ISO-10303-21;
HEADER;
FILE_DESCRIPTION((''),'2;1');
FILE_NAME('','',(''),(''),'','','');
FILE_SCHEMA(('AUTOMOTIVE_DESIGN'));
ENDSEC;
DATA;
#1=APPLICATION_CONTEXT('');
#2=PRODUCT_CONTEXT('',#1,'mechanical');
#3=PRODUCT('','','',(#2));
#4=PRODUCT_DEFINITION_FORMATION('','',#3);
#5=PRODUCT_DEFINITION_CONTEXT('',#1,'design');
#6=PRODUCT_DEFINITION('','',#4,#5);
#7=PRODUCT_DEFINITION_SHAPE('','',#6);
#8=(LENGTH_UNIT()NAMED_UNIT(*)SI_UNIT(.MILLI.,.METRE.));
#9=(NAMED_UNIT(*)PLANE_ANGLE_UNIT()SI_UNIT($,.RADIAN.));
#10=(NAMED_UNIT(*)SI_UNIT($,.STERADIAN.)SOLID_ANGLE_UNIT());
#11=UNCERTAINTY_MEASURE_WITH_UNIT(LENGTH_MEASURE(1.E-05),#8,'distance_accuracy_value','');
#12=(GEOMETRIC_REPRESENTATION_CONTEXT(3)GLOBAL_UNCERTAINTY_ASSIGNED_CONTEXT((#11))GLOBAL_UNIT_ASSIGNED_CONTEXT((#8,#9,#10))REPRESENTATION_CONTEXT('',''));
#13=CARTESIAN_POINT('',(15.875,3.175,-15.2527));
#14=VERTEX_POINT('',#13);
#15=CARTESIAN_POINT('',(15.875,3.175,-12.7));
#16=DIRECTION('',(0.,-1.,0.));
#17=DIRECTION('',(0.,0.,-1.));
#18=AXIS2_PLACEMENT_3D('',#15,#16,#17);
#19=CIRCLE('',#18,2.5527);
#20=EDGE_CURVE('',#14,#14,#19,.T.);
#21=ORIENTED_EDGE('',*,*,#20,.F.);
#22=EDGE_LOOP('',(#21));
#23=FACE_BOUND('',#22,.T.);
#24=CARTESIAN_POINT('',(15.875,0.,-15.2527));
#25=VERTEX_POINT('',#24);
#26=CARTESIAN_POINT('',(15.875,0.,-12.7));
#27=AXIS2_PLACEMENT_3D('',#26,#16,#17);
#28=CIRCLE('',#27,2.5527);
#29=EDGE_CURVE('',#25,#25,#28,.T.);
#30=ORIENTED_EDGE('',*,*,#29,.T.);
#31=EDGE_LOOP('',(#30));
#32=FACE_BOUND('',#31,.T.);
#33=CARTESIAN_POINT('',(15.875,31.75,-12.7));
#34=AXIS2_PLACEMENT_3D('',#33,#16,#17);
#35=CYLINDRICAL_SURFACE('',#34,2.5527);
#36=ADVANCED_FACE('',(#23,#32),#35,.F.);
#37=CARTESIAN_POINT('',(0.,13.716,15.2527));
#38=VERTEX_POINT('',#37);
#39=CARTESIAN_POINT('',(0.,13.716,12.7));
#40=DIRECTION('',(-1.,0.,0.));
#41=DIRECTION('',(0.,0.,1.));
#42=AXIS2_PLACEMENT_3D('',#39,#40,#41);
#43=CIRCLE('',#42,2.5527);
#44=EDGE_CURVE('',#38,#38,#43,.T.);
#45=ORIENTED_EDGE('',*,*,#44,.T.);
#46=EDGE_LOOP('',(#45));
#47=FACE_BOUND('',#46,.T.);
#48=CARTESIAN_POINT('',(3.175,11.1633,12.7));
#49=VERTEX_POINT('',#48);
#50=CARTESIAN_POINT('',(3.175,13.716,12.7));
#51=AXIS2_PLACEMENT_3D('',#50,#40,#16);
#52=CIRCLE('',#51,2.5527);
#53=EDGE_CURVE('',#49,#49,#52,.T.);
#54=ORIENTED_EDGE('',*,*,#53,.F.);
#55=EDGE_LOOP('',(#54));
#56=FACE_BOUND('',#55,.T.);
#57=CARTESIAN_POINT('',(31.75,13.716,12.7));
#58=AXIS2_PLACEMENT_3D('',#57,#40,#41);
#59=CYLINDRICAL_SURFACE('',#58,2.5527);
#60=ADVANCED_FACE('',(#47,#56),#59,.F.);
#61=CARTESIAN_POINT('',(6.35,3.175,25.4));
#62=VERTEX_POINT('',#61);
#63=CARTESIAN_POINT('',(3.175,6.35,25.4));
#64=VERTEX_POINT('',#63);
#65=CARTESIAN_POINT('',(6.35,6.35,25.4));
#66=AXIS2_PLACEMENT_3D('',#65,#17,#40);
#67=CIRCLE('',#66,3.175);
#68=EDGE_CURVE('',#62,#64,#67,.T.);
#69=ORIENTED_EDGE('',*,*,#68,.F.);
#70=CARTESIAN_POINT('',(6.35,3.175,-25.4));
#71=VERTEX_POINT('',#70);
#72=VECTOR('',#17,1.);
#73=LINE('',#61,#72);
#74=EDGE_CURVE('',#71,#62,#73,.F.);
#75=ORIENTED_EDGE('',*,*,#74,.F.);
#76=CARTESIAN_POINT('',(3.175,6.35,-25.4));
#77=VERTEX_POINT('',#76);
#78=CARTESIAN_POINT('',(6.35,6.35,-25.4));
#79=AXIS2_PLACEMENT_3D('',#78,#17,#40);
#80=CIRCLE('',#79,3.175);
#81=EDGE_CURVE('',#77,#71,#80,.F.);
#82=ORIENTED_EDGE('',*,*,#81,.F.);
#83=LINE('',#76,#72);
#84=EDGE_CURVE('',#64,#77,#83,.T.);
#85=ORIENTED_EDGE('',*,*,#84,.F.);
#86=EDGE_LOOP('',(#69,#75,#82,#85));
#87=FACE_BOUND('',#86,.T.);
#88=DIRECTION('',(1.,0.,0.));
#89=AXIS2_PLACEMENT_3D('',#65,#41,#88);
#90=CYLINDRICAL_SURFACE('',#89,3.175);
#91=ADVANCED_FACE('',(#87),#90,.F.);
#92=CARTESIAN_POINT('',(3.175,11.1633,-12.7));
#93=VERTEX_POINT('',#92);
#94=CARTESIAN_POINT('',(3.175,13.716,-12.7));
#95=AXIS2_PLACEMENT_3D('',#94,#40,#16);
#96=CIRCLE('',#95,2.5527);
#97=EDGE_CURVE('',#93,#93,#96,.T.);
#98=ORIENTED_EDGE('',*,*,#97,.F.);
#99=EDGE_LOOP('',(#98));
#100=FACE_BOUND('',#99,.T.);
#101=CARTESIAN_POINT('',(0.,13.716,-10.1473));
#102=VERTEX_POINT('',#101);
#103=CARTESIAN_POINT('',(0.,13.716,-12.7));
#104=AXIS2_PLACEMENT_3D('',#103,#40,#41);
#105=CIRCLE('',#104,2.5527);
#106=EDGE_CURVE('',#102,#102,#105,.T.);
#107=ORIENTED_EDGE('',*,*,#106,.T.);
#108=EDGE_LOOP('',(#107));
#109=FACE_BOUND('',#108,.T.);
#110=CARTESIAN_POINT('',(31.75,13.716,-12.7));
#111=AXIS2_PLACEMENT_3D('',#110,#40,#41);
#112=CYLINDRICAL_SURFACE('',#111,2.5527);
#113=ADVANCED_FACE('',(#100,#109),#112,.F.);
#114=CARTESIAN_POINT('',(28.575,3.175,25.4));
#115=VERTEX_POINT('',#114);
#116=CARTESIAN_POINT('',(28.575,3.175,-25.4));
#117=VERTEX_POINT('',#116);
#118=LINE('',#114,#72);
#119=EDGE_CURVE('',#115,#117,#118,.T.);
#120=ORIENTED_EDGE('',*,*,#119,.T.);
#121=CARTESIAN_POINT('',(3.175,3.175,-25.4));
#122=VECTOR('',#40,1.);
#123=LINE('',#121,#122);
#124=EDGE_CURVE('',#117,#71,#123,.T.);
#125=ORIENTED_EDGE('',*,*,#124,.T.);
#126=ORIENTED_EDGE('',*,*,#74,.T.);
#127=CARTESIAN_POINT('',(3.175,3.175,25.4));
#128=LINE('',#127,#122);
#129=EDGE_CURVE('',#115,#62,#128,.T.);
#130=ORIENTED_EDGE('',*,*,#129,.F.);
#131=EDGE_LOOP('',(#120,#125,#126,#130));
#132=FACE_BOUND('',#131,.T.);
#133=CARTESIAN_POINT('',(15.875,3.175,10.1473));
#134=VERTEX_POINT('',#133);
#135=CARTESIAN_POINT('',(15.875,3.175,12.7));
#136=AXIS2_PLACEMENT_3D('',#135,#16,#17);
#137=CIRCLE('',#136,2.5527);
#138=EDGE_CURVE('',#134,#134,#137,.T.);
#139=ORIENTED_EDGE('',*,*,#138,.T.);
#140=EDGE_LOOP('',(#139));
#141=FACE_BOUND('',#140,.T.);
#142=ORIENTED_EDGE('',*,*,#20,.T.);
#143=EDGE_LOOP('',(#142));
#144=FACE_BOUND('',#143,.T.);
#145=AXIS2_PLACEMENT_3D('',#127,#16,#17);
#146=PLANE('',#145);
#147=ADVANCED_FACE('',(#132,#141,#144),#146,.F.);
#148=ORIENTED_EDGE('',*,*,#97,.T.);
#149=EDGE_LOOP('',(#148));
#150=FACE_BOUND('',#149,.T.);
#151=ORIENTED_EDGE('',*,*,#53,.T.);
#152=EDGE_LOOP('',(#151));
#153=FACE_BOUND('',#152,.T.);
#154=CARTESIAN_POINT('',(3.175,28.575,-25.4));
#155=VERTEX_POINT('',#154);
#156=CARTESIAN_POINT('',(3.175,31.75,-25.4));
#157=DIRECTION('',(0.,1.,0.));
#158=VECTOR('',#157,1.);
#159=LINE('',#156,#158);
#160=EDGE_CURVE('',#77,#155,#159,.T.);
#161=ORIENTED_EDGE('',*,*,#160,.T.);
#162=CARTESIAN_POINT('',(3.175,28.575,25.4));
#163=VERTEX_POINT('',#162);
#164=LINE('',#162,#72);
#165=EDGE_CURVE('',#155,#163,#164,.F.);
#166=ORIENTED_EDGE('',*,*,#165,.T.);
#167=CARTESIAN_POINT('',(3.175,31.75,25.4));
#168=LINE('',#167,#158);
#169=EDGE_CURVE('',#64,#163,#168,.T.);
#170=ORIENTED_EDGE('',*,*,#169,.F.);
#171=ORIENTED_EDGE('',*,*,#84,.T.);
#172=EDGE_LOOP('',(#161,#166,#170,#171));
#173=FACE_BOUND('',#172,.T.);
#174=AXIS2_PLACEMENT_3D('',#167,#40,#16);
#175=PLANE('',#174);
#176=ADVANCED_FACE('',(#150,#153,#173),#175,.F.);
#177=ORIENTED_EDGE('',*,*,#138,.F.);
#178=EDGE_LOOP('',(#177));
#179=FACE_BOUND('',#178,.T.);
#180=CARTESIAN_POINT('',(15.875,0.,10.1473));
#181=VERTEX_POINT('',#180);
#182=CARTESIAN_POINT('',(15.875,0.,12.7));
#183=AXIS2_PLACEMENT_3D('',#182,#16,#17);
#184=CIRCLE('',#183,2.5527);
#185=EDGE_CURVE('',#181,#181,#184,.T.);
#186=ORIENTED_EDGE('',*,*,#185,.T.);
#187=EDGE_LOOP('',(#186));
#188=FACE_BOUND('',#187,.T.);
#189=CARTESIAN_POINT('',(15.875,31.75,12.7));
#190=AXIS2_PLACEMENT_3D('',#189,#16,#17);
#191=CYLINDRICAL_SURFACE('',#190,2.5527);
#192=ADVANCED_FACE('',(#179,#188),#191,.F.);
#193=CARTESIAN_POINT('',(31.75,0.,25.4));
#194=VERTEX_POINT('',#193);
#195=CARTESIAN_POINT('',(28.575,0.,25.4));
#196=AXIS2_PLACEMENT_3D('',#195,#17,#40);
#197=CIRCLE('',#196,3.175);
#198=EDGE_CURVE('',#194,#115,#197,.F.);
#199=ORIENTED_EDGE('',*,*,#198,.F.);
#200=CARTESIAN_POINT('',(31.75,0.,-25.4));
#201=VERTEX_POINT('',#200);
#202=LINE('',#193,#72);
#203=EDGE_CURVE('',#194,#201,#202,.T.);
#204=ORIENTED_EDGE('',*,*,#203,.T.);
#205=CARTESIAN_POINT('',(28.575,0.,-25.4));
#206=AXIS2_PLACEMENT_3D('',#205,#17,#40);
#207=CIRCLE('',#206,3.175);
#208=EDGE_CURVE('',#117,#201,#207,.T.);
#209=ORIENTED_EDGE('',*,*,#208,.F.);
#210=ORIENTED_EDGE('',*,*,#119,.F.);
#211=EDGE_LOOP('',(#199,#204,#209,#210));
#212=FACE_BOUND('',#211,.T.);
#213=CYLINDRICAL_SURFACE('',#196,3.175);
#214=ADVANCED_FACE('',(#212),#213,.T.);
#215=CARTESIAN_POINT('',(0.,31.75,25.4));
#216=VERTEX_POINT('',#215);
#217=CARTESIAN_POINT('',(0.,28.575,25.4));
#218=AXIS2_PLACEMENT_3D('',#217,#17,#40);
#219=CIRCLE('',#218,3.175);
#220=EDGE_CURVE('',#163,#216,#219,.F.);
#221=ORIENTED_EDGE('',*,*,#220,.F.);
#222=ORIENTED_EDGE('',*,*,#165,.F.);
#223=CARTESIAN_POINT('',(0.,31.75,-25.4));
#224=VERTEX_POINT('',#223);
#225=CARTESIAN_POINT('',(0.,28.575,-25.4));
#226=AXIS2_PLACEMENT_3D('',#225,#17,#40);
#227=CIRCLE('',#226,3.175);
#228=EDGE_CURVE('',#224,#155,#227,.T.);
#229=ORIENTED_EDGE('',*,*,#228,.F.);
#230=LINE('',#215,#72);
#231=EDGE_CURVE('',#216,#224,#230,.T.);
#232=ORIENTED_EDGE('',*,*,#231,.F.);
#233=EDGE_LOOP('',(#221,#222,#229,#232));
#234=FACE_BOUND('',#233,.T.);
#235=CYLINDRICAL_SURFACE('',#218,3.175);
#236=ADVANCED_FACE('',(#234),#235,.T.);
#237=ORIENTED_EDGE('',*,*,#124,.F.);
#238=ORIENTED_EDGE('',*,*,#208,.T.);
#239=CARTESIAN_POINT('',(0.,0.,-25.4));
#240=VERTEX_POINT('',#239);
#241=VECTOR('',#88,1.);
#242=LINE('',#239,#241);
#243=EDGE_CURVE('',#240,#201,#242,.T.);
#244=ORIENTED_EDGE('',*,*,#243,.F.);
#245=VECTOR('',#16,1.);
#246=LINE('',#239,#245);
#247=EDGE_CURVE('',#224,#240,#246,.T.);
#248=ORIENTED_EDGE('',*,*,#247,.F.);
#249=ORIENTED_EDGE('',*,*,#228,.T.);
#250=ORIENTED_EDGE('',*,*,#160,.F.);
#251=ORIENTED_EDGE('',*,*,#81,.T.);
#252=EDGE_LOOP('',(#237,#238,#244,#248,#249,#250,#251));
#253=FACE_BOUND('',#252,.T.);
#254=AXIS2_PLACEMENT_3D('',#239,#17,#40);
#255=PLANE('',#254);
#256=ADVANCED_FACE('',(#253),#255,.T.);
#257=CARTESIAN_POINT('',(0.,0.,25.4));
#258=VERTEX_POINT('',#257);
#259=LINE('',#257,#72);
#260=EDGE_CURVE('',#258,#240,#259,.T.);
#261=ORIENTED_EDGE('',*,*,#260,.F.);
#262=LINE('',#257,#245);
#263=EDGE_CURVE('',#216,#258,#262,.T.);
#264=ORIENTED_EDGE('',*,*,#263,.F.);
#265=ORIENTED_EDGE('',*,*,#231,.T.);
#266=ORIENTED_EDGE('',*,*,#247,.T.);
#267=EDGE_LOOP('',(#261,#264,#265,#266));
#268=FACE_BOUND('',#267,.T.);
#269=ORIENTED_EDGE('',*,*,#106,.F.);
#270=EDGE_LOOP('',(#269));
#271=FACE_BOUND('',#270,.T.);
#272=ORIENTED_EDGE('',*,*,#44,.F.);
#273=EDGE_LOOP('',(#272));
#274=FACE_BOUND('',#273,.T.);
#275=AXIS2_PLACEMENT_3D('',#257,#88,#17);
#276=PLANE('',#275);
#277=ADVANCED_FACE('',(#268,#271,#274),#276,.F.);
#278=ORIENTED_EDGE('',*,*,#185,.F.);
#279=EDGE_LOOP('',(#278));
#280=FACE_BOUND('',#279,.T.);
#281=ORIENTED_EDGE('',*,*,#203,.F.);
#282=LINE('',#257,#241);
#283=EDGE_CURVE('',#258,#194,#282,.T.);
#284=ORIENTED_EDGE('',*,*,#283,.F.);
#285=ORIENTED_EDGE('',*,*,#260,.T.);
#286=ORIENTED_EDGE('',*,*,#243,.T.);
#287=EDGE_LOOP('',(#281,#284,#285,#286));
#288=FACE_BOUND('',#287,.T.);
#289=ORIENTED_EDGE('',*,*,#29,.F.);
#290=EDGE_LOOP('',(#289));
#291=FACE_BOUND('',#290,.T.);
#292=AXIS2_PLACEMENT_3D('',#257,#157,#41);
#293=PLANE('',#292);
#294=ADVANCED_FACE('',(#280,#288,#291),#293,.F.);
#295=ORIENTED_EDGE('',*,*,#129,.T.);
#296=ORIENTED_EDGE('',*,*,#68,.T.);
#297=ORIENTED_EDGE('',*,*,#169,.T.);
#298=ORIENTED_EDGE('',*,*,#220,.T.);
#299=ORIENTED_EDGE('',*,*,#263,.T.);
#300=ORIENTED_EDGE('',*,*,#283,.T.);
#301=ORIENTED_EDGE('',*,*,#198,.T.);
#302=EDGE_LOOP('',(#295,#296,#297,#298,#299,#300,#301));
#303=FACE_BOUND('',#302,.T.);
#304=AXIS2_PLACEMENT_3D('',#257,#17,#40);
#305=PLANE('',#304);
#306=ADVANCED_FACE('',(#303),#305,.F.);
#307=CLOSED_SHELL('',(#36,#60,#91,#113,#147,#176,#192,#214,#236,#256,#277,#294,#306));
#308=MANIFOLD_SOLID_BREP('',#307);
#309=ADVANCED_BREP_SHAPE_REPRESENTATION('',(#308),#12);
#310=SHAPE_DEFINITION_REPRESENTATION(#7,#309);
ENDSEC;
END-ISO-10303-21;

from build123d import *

# Parameters (mm, degrees)
BOSS_EXTRUDE1_DEPTH = 25.4
SKETCH2_R           = 2.5527
CUT_EXTRUDE1_DEPTH  = 52.587643869
SKETCH3_R           = 2.5527
CUT_EXTRUDE2_DEPTH  = 52.587643869
FILLET1_R           = 3.175


with BuildPart() as part:
    # Sketch1 → Boss-Extrude1 (new, symmetric)
    with BuildSketch(Plane.XY):
        Polygon((0, 0), (0, 31.75), (3.175, 31.75), (3.175, 3.175), (31.75, 3.175), (31.75, 0), align=None)
    extrude(amount=BOSS_EXTRUDE1_DEPTH, both=True)

    # Sketch2 → Cut-Extrude1 (cut, through all)
    with BuildSketch(Plane.ZY):
        with Locations((-12.7, 13.716)):
            Circle(SKETCH2_R)
        with Locations((12.7, 13.716)):
            Circle(SKETCH2_R)
    extrude(amount=-CUT_EXTRUDE1_DEPTH, mode=Mode.SUBTRACT)

    # Sketch3 → Cut-Extrude2 (cut, through all)
    with BuildSketch(Plane.XZ):
        with Locations(Location((15.875, 12.7, 0), (0, 0, 270))):
            Circle(SKETCH3_R)
        with Locations(Location((15.875, -12.7, 0), (0, 0, 270))):
            Circle(SKETCH3_R)
    extrude(amount=-CUT_EXTRUDE2_DEPTH, mode=Mode.SUBTRACT)

    # Fillet1
    fillet1_edges = [part.edges().sort_by_distance(p)[0] for p in [
        (3.175, 31.75, 0),
        (31.75, 3.175, 0),
        (3.175, 3.175, 0),
    ]]
    fillet(fillet1_edges, radius=FILLET1_R - 0.0001)  # a hair under: the kernel refuses the full size


solid = part.part
